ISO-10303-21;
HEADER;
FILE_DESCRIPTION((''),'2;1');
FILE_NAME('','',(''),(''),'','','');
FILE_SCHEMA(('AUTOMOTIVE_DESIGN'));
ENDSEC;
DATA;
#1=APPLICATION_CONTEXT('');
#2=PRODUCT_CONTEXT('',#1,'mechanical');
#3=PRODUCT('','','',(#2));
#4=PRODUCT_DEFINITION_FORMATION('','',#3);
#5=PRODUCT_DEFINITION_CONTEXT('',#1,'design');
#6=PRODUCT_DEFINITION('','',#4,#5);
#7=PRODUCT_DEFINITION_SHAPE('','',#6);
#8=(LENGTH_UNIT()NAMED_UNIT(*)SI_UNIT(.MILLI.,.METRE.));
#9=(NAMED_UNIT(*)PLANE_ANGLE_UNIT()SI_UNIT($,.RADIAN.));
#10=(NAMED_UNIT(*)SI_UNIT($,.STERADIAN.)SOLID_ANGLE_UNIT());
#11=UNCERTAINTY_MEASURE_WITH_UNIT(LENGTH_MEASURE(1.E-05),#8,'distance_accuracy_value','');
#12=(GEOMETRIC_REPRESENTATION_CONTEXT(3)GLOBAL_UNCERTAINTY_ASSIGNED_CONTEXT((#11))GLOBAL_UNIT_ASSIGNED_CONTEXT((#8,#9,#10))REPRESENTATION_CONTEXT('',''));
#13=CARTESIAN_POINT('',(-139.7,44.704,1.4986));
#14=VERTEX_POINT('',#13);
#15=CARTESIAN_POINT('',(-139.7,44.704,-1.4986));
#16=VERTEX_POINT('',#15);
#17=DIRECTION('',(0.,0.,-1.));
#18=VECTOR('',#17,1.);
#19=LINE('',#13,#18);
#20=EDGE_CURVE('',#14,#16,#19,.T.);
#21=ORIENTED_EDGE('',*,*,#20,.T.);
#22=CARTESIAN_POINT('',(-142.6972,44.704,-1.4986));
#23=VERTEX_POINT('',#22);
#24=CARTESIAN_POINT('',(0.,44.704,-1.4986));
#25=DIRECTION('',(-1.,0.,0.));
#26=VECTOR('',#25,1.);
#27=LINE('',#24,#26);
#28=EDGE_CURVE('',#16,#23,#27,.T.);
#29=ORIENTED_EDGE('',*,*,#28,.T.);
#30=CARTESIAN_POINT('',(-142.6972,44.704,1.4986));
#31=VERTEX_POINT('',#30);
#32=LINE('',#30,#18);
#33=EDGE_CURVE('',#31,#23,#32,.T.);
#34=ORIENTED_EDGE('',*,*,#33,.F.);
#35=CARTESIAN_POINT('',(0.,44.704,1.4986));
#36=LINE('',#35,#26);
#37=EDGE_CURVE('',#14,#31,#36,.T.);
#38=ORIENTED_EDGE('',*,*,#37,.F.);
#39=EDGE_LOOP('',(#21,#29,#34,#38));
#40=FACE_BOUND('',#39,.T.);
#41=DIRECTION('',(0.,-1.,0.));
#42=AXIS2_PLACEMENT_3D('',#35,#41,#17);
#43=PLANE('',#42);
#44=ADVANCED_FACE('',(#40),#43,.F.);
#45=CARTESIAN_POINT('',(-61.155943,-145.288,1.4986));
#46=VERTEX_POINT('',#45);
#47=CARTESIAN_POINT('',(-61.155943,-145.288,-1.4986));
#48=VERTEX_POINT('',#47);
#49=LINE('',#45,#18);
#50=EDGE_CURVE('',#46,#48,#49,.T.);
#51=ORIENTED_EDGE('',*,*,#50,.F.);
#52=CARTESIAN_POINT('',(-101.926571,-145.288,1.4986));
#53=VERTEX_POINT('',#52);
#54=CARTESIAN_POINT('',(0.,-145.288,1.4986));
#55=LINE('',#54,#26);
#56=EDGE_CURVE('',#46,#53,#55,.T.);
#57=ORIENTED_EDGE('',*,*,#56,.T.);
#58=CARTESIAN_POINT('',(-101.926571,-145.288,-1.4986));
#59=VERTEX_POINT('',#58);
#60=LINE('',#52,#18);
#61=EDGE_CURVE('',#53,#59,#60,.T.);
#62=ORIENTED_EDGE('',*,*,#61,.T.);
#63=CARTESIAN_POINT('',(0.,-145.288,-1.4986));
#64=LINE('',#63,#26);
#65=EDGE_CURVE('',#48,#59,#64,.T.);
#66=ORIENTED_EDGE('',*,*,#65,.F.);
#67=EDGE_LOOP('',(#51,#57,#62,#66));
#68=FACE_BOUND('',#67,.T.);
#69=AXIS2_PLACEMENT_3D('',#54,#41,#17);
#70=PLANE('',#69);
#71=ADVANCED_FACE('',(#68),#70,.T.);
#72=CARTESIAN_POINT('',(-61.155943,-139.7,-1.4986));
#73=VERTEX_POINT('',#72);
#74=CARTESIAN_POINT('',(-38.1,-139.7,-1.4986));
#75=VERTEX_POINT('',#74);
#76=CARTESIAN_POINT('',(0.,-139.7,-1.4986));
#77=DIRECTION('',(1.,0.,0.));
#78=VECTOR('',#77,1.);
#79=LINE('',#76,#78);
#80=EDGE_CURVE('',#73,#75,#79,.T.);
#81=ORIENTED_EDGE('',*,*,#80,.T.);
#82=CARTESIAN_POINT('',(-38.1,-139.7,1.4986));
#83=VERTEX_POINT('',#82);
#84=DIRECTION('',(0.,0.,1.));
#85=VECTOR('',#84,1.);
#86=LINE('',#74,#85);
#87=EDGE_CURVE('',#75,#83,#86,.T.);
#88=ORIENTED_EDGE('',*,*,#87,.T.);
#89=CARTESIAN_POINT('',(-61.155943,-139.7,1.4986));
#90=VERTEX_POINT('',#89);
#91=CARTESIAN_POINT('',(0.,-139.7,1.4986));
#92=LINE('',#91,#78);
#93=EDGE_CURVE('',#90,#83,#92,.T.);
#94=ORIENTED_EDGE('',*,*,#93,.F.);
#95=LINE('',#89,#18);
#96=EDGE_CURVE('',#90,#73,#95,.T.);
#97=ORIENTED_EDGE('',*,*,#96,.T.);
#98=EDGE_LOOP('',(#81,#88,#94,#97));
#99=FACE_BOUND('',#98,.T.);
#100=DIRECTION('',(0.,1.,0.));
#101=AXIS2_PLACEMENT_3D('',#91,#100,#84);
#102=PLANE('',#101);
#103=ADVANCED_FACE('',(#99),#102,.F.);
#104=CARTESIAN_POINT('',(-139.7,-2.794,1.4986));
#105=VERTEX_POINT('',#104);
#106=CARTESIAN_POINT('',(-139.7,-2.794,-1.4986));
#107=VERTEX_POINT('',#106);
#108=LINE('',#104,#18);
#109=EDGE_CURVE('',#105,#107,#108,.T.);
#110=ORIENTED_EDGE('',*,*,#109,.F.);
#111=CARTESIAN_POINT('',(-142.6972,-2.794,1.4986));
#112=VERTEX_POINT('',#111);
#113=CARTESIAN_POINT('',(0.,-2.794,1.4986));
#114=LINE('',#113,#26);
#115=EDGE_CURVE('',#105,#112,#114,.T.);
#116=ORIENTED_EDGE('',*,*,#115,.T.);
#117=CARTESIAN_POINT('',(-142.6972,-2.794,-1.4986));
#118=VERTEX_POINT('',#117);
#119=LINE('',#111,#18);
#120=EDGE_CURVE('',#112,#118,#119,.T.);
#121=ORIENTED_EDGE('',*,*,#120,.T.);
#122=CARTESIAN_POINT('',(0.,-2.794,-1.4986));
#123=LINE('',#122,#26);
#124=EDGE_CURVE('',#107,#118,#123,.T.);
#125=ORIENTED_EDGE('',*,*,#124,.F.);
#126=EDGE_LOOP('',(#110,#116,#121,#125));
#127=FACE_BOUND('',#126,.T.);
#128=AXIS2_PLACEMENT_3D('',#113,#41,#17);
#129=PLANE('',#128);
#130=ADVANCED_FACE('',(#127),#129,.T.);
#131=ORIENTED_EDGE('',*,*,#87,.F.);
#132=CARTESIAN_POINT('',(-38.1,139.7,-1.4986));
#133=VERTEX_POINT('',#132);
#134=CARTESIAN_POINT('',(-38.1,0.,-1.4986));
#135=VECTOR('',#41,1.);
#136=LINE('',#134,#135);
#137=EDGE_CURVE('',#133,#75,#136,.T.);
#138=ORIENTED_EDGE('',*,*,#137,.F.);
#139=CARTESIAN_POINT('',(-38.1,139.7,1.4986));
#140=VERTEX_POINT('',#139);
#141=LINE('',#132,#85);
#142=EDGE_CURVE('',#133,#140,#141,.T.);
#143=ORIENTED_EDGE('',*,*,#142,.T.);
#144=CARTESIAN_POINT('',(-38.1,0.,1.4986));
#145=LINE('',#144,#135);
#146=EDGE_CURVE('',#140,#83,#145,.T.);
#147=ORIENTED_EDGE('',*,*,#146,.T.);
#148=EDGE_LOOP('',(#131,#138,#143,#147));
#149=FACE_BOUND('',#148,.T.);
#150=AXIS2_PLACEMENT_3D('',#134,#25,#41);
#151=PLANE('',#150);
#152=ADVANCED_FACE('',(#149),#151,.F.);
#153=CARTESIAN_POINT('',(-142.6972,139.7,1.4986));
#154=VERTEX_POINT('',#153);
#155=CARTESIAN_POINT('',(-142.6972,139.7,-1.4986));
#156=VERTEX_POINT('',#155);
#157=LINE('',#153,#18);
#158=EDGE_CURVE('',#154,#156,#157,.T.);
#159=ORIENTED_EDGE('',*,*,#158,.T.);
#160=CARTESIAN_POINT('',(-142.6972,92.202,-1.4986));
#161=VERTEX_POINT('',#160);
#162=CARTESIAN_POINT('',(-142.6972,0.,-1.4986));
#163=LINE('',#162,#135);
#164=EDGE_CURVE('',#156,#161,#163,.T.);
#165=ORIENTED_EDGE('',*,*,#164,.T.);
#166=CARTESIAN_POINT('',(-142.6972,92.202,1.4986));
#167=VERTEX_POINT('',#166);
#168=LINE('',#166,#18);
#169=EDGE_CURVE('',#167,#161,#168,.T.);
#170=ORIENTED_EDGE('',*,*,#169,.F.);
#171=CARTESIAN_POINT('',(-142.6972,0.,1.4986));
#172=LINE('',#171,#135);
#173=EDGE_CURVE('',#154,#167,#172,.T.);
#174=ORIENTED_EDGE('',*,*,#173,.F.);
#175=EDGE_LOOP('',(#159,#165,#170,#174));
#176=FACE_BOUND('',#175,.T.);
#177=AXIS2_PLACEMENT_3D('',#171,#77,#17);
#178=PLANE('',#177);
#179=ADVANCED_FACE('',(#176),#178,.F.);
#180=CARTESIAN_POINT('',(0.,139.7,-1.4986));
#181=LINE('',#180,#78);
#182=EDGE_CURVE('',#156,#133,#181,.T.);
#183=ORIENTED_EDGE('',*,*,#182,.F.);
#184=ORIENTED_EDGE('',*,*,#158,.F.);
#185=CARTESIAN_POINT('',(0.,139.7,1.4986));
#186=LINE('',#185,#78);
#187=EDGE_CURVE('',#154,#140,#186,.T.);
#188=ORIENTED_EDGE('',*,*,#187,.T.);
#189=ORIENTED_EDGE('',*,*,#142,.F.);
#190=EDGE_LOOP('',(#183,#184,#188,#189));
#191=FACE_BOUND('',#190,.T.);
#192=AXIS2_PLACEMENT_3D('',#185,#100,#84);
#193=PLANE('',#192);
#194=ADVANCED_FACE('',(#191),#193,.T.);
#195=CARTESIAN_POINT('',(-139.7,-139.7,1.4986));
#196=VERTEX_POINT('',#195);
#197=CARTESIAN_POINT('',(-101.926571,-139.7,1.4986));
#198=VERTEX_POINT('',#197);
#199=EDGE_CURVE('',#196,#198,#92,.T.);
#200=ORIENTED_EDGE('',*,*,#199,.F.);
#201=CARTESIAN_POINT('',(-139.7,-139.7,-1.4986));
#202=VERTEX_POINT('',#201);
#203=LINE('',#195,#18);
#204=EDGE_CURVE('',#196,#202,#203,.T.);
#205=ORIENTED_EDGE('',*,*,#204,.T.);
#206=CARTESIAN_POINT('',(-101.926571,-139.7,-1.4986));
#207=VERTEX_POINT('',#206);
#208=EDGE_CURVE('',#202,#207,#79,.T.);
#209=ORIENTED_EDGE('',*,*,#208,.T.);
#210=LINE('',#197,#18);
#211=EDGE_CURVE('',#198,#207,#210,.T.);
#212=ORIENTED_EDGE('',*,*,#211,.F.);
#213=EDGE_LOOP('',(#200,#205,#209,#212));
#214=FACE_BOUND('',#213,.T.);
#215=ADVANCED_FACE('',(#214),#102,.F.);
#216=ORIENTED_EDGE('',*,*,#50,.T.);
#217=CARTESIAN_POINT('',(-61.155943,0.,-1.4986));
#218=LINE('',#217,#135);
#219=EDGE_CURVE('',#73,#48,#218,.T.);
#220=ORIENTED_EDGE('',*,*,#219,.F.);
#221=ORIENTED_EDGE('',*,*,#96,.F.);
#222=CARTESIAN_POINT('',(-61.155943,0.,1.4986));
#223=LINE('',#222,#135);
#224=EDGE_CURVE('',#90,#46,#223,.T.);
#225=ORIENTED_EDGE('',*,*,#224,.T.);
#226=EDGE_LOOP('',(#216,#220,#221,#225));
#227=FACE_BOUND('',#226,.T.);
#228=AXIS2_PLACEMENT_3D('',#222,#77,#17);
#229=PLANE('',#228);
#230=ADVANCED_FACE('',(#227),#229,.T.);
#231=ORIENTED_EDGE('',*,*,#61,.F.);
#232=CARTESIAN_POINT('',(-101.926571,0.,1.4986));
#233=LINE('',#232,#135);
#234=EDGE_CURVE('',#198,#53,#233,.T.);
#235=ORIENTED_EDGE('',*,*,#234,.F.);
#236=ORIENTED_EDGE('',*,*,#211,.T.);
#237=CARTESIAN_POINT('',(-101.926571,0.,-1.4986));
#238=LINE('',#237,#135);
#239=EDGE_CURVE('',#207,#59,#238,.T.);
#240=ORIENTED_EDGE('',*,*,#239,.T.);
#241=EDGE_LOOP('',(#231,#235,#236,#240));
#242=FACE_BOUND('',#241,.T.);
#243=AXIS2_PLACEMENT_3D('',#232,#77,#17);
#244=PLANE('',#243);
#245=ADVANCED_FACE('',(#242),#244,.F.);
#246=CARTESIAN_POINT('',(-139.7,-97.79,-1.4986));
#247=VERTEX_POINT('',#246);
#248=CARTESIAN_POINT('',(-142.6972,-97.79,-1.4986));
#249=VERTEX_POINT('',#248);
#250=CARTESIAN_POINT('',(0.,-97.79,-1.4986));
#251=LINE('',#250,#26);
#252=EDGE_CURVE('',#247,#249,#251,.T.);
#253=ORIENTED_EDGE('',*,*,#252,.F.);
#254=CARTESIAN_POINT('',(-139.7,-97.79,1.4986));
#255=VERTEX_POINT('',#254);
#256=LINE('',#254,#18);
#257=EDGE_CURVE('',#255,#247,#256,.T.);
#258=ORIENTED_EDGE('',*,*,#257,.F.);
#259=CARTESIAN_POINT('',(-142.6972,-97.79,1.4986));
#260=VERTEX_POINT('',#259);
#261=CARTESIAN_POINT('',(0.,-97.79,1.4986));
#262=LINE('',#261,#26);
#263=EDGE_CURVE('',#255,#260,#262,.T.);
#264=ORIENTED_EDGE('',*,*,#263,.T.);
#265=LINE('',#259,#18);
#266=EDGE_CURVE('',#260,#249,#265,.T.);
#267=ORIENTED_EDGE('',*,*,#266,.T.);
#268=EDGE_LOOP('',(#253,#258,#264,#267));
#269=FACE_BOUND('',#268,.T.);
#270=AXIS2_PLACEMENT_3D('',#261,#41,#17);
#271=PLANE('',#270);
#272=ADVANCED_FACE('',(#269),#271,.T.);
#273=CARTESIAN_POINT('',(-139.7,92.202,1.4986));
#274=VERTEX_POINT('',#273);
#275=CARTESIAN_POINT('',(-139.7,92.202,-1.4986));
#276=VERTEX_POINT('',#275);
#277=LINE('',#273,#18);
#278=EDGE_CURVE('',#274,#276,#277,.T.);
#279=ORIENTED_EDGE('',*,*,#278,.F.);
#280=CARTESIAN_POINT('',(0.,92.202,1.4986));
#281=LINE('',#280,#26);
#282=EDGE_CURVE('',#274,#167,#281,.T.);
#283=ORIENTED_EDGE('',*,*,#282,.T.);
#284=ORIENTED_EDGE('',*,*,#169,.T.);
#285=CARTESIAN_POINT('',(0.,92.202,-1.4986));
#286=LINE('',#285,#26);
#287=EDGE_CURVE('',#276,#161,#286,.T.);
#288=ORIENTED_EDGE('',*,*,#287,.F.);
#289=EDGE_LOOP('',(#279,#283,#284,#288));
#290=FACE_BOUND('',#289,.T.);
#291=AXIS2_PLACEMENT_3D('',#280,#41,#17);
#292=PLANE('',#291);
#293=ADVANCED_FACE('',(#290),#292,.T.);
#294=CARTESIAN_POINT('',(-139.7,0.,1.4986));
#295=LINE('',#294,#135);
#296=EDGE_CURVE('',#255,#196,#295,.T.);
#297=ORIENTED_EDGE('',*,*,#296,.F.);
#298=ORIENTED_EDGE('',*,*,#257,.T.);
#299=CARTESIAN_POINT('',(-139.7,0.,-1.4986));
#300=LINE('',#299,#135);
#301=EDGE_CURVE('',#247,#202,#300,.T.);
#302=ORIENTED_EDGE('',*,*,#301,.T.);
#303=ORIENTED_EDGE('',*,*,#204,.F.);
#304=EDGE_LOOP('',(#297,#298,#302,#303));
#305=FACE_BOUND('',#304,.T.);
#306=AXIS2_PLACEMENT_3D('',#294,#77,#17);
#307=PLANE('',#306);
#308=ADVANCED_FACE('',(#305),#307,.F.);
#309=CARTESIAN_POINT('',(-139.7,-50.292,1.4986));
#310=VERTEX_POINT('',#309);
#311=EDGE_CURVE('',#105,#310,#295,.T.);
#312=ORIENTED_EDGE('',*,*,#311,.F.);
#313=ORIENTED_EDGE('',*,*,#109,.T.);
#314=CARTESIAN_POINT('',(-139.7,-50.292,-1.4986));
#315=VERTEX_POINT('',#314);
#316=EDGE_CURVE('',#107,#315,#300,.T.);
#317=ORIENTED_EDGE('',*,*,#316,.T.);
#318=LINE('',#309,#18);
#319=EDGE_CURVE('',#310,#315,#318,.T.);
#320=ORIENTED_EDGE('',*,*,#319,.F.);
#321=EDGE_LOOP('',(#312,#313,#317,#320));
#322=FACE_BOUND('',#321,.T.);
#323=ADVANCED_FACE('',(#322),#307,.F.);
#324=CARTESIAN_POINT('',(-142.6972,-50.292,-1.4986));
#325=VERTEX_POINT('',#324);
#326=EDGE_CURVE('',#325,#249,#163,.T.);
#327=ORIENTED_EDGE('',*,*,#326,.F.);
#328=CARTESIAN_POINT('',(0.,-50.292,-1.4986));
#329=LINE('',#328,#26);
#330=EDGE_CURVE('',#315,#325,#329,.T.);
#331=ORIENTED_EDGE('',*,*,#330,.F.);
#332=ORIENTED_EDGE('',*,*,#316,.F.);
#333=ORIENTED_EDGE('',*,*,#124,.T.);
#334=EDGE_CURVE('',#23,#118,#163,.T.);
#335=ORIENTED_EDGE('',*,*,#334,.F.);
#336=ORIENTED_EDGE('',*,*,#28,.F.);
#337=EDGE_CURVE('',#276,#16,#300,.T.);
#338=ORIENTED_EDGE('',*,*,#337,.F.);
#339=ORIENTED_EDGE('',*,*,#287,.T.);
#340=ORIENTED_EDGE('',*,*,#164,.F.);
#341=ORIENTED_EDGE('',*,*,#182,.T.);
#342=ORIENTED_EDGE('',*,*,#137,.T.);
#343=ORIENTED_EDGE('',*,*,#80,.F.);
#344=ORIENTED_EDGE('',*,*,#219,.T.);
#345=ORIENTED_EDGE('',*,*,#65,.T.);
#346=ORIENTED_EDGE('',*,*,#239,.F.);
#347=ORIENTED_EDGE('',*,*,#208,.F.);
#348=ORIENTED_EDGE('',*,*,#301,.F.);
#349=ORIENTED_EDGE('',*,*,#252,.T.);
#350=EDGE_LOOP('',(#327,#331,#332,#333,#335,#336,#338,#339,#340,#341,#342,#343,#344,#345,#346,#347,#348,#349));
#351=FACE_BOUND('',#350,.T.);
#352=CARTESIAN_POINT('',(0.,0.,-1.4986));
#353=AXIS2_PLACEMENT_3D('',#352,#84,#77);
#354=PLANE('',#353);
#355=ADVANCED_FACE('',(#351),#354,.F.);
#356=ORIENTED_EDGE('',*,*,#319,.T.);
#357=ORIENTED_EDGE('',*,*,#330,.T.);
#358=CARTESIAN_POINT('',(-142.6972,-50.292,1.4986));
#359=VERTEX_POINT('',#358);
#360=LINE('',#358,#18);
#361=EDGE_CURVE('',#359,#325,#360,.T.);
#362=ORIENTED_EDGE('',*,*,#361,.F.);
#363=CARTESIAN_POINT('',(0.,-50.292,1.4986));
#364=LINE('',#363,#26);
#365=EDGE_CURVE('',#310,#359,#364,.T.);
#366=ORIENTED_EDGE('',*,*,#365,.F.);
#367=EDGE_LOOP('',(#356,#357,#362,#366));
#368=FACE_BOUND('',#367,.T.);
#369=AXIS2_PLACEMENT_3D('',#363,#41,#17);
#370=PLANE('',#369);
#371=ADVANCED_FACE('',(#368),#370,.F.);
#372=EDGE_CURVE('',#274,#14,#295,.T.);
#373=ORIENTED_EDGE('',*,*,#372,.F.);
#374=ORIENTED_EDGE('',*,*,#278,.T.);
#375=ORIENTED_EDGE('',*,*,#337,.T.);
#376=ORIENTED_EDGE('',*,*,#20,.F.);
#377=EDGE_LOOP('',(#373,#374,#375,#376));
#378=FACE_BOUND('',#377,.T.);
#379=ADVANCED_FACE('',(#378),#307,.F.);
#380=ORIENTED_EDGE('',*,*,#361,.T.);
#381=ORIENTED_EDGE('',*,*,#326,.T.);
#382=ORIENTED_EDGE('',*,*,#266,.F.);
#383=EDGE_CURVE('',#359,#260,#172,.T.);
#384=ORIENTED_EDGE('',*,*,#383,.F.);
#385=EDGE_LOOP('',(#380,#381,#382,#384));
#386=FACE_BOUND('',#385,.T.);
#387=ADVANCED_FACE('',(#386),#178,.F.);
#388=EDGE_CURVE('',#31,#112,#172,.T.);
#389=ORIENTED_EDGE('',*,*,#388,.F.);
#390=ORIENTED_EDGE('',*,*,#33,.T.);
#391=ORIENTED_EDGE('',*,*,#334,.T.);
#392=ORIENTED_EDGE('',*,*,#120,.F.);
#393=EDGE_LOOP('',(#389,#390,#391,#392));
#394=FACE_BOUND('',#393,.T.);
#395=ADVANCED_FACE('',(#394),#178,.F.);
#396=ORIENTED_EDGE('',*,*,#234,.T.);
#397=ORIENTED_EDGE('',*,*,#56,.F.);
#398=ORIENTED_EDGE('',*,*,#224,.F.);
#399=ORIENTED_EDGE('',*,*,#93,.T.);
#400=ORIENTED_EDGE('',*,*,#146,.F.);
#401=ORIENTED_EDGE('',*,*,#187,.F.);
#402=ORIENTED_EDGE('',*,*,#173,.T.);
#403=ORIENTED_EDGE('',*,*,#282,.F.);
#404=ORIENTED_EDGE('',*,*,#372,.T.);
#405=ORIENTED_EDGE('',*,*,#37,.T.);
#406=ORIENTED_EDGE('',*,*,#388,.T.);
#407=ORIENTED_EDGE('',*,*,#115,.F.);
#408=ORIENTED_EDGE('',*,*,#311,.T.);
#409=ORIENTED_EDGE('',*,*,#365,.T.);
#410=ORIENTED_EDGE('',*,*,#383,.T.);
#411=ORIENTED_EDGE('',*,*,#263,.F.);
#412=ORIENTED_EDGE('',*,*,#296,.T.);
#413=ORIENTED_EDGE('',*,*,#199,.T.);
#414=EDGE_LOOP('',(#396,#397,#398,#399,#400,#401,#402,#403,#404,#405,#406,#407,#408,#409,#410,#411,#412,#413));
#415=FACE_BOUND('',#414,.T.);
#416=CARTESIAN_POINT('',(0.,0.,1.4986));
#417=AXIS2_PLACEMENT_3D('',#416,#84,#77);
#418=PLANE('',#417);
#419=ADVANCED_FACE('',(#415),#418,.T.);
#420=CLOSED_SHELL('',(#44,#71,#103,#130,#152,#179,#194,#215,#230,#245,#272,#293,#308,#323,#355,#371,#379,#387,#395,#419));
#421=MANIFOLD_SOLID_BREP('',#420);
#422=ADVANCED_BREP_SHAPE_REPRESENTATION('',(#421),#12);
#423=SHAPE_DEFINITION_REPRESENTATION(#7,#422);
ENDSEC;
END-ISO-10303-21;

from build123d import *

# Parameters (mm, degrees)
BOSS_EXTRUDE1_DEPTH = 1.4986
MIRROR1_START       = -139.7
MIRROR1_OUTLINE_W   = 101.6
MIRROR1_OUTLINE_H   = 2.9972
MIRROR1_DEPTH       = 279.4
MIRROR1_START_2     = -145.288
MIRROR1_2_OUTLINE_W = 40.770628572
MIRROR1_2_OUTLINE_H = 2.9972
MIRROR1_2_DEPTH     = 5.588
MIRROR1_START_3     = -97.79
MIRROR1_3_OUTLINE_W = 2.9972
MIRROR1_3_OUTLINE_H = 2.9972
MIRROR1_3_DEPTH     = 47.498
MIRROR1_START_4     = -2.794
MIRROR1_4_OUTLINE_W = 2.9972
MIRROR1_4_OUTLINE_H = 2.9972
MIRROR1_4_DEPTH     = 47.498
MIRROR1_START_5     = 92.202
MIRROR1_5_OUTLINE_W = 2.9972
MIRROR1_5_OUTLINE_H = 2.9972
MIRROR1_5_DEPTH     = 47.498
CUT_EXTRUDE2_DEPTH  = 204.666583022


# Read off the part's stored shape, not the designer's step: Mirror1
with BuildPart() as part:
    # Sketch1 → Boss-Extrude1 (new, symmetric)
    with BuildSketch(Plane.XY):
        Polygon((-38.1, 139.7), (-142.6972, 139.7), (-142.6972, 92.202), (-139.7, 92.202), (-139.7, 44.704), (-142.6972, 44.704), (-142.6972, -2.794), (-139.7, -2.794), (-139.7, -50.292), (-142.6972, -50.292), (-142.6972, -97.79), (-139.7, -97.79), (-139.7, -139.7), (-101.926571429, -139.7), (-101.926571429, -145.288), (-61.155942857, -145.288), (-61.155942857, -139.7), (-38.1, -139.7), align=None)
    extrude(amount=BOSS_EXTRUDE1_DEPTH, both=True)

    # Mirror1 outline → Mirror1 (add)
    with BuildSketch(Plane(origin=(0, 0, 0), x_dir=(1, 0, 0), z_dir=(0, 1, 0)).offset(MIRROR1_START)):
        with Locations((12.7, 0)):
            Rectangle(MIRROR1_OUTLINE_W, MIRROR1_OUTLINE_H)
    extrude(amount=MIRROR1_DEPTH)

    # Mirror1 2 outline → Mirror1 2 (add)
    with BuildSketch(Plane(origin=(0, 0, 0), x_dir=(1, 0, 0), z_dir=(0, 1, 0)).offset(MIRROR1_START_2)):
        with Locations((5.341257143, 0)):
            Rectangle(MIRROR1_2_OUTLINE_W, MIRROR1_2_OUTLINE_H)
    extrude(amount=MIRROR1_2_DEPTH)

    # Mirror1 3 outline → Mirror1 3 (add)
    with BuildSketch(Plane(origin=(0, 0, 0), x_dir=(1, 0, 0), z_dir=(0, 1, 0)).offset(MIRROR1_START_3)):
        with Locations((64.9986, 0)):
            Rectangle(MIRROR1_3_OUTLINE_W, MIRROR1_3_OUTLINE_H)
    extrude(amount=MIRROR1_3_DEPTH)

    # Mirror1 4 outline → Mirror1 4 (add)
    with BuildSketch(Plane(origin=(0, 0, 0), x_dir=(1, 0, 0), z_dir=(0, 1, 0)).offset(MIRROR1_START_4)):
        with Locations((64.9986, 0)):
            Rectangle(MIRROR1_4_OUTLINE_W, MIRROR1_4_OUTLINE_H)
    extrude(amount=MIRROR1_4_DEPTH)

    # Mirror1 5 outline → Mirror1 5 (add)
    with BuildSketch(Plane(origin=(0, 0, 0), x_dir=(1, 0, 0), z_dir=(0, 1, 0)).offset(MIRROR1_START_5)):
        with Locations((64.9986, 0)):
            Rectangle(MIRROR1_5_OUTLINE_W, MIRROR1_5_OUTLINE_H)
    extrude(amount=MIRROR1_5_DEPTH)

    # Sketch2<3> → Cut-Extrude2 (cut, through all)
    with BuildSketch(Plane.XY.offset(1.4986)):
        Polygon((66.4972, 139.7), (-38.1, 139.7), (-38.1, -139.7), (-15.044057143, -139.7), (-15.044057143, -145.288), (25.726571429, -145.288), (25.726571429, -139.7), (63.5, -139.7), (63.5, -97.79), (66.4972, -97.79), (66.4972, -50.292), (63.5, -50.292), (63.5, -2.794), (66.4972, -2.794), (66.4972, 44.704), (63.5, 44.704), (63.5, 92.202), (66.4972, 92.202), align=None)
    extrude(amount=-CUT_EXTRUDE2_DEPTH, mode=Mode.SUBTRACT)


solid = part.part
